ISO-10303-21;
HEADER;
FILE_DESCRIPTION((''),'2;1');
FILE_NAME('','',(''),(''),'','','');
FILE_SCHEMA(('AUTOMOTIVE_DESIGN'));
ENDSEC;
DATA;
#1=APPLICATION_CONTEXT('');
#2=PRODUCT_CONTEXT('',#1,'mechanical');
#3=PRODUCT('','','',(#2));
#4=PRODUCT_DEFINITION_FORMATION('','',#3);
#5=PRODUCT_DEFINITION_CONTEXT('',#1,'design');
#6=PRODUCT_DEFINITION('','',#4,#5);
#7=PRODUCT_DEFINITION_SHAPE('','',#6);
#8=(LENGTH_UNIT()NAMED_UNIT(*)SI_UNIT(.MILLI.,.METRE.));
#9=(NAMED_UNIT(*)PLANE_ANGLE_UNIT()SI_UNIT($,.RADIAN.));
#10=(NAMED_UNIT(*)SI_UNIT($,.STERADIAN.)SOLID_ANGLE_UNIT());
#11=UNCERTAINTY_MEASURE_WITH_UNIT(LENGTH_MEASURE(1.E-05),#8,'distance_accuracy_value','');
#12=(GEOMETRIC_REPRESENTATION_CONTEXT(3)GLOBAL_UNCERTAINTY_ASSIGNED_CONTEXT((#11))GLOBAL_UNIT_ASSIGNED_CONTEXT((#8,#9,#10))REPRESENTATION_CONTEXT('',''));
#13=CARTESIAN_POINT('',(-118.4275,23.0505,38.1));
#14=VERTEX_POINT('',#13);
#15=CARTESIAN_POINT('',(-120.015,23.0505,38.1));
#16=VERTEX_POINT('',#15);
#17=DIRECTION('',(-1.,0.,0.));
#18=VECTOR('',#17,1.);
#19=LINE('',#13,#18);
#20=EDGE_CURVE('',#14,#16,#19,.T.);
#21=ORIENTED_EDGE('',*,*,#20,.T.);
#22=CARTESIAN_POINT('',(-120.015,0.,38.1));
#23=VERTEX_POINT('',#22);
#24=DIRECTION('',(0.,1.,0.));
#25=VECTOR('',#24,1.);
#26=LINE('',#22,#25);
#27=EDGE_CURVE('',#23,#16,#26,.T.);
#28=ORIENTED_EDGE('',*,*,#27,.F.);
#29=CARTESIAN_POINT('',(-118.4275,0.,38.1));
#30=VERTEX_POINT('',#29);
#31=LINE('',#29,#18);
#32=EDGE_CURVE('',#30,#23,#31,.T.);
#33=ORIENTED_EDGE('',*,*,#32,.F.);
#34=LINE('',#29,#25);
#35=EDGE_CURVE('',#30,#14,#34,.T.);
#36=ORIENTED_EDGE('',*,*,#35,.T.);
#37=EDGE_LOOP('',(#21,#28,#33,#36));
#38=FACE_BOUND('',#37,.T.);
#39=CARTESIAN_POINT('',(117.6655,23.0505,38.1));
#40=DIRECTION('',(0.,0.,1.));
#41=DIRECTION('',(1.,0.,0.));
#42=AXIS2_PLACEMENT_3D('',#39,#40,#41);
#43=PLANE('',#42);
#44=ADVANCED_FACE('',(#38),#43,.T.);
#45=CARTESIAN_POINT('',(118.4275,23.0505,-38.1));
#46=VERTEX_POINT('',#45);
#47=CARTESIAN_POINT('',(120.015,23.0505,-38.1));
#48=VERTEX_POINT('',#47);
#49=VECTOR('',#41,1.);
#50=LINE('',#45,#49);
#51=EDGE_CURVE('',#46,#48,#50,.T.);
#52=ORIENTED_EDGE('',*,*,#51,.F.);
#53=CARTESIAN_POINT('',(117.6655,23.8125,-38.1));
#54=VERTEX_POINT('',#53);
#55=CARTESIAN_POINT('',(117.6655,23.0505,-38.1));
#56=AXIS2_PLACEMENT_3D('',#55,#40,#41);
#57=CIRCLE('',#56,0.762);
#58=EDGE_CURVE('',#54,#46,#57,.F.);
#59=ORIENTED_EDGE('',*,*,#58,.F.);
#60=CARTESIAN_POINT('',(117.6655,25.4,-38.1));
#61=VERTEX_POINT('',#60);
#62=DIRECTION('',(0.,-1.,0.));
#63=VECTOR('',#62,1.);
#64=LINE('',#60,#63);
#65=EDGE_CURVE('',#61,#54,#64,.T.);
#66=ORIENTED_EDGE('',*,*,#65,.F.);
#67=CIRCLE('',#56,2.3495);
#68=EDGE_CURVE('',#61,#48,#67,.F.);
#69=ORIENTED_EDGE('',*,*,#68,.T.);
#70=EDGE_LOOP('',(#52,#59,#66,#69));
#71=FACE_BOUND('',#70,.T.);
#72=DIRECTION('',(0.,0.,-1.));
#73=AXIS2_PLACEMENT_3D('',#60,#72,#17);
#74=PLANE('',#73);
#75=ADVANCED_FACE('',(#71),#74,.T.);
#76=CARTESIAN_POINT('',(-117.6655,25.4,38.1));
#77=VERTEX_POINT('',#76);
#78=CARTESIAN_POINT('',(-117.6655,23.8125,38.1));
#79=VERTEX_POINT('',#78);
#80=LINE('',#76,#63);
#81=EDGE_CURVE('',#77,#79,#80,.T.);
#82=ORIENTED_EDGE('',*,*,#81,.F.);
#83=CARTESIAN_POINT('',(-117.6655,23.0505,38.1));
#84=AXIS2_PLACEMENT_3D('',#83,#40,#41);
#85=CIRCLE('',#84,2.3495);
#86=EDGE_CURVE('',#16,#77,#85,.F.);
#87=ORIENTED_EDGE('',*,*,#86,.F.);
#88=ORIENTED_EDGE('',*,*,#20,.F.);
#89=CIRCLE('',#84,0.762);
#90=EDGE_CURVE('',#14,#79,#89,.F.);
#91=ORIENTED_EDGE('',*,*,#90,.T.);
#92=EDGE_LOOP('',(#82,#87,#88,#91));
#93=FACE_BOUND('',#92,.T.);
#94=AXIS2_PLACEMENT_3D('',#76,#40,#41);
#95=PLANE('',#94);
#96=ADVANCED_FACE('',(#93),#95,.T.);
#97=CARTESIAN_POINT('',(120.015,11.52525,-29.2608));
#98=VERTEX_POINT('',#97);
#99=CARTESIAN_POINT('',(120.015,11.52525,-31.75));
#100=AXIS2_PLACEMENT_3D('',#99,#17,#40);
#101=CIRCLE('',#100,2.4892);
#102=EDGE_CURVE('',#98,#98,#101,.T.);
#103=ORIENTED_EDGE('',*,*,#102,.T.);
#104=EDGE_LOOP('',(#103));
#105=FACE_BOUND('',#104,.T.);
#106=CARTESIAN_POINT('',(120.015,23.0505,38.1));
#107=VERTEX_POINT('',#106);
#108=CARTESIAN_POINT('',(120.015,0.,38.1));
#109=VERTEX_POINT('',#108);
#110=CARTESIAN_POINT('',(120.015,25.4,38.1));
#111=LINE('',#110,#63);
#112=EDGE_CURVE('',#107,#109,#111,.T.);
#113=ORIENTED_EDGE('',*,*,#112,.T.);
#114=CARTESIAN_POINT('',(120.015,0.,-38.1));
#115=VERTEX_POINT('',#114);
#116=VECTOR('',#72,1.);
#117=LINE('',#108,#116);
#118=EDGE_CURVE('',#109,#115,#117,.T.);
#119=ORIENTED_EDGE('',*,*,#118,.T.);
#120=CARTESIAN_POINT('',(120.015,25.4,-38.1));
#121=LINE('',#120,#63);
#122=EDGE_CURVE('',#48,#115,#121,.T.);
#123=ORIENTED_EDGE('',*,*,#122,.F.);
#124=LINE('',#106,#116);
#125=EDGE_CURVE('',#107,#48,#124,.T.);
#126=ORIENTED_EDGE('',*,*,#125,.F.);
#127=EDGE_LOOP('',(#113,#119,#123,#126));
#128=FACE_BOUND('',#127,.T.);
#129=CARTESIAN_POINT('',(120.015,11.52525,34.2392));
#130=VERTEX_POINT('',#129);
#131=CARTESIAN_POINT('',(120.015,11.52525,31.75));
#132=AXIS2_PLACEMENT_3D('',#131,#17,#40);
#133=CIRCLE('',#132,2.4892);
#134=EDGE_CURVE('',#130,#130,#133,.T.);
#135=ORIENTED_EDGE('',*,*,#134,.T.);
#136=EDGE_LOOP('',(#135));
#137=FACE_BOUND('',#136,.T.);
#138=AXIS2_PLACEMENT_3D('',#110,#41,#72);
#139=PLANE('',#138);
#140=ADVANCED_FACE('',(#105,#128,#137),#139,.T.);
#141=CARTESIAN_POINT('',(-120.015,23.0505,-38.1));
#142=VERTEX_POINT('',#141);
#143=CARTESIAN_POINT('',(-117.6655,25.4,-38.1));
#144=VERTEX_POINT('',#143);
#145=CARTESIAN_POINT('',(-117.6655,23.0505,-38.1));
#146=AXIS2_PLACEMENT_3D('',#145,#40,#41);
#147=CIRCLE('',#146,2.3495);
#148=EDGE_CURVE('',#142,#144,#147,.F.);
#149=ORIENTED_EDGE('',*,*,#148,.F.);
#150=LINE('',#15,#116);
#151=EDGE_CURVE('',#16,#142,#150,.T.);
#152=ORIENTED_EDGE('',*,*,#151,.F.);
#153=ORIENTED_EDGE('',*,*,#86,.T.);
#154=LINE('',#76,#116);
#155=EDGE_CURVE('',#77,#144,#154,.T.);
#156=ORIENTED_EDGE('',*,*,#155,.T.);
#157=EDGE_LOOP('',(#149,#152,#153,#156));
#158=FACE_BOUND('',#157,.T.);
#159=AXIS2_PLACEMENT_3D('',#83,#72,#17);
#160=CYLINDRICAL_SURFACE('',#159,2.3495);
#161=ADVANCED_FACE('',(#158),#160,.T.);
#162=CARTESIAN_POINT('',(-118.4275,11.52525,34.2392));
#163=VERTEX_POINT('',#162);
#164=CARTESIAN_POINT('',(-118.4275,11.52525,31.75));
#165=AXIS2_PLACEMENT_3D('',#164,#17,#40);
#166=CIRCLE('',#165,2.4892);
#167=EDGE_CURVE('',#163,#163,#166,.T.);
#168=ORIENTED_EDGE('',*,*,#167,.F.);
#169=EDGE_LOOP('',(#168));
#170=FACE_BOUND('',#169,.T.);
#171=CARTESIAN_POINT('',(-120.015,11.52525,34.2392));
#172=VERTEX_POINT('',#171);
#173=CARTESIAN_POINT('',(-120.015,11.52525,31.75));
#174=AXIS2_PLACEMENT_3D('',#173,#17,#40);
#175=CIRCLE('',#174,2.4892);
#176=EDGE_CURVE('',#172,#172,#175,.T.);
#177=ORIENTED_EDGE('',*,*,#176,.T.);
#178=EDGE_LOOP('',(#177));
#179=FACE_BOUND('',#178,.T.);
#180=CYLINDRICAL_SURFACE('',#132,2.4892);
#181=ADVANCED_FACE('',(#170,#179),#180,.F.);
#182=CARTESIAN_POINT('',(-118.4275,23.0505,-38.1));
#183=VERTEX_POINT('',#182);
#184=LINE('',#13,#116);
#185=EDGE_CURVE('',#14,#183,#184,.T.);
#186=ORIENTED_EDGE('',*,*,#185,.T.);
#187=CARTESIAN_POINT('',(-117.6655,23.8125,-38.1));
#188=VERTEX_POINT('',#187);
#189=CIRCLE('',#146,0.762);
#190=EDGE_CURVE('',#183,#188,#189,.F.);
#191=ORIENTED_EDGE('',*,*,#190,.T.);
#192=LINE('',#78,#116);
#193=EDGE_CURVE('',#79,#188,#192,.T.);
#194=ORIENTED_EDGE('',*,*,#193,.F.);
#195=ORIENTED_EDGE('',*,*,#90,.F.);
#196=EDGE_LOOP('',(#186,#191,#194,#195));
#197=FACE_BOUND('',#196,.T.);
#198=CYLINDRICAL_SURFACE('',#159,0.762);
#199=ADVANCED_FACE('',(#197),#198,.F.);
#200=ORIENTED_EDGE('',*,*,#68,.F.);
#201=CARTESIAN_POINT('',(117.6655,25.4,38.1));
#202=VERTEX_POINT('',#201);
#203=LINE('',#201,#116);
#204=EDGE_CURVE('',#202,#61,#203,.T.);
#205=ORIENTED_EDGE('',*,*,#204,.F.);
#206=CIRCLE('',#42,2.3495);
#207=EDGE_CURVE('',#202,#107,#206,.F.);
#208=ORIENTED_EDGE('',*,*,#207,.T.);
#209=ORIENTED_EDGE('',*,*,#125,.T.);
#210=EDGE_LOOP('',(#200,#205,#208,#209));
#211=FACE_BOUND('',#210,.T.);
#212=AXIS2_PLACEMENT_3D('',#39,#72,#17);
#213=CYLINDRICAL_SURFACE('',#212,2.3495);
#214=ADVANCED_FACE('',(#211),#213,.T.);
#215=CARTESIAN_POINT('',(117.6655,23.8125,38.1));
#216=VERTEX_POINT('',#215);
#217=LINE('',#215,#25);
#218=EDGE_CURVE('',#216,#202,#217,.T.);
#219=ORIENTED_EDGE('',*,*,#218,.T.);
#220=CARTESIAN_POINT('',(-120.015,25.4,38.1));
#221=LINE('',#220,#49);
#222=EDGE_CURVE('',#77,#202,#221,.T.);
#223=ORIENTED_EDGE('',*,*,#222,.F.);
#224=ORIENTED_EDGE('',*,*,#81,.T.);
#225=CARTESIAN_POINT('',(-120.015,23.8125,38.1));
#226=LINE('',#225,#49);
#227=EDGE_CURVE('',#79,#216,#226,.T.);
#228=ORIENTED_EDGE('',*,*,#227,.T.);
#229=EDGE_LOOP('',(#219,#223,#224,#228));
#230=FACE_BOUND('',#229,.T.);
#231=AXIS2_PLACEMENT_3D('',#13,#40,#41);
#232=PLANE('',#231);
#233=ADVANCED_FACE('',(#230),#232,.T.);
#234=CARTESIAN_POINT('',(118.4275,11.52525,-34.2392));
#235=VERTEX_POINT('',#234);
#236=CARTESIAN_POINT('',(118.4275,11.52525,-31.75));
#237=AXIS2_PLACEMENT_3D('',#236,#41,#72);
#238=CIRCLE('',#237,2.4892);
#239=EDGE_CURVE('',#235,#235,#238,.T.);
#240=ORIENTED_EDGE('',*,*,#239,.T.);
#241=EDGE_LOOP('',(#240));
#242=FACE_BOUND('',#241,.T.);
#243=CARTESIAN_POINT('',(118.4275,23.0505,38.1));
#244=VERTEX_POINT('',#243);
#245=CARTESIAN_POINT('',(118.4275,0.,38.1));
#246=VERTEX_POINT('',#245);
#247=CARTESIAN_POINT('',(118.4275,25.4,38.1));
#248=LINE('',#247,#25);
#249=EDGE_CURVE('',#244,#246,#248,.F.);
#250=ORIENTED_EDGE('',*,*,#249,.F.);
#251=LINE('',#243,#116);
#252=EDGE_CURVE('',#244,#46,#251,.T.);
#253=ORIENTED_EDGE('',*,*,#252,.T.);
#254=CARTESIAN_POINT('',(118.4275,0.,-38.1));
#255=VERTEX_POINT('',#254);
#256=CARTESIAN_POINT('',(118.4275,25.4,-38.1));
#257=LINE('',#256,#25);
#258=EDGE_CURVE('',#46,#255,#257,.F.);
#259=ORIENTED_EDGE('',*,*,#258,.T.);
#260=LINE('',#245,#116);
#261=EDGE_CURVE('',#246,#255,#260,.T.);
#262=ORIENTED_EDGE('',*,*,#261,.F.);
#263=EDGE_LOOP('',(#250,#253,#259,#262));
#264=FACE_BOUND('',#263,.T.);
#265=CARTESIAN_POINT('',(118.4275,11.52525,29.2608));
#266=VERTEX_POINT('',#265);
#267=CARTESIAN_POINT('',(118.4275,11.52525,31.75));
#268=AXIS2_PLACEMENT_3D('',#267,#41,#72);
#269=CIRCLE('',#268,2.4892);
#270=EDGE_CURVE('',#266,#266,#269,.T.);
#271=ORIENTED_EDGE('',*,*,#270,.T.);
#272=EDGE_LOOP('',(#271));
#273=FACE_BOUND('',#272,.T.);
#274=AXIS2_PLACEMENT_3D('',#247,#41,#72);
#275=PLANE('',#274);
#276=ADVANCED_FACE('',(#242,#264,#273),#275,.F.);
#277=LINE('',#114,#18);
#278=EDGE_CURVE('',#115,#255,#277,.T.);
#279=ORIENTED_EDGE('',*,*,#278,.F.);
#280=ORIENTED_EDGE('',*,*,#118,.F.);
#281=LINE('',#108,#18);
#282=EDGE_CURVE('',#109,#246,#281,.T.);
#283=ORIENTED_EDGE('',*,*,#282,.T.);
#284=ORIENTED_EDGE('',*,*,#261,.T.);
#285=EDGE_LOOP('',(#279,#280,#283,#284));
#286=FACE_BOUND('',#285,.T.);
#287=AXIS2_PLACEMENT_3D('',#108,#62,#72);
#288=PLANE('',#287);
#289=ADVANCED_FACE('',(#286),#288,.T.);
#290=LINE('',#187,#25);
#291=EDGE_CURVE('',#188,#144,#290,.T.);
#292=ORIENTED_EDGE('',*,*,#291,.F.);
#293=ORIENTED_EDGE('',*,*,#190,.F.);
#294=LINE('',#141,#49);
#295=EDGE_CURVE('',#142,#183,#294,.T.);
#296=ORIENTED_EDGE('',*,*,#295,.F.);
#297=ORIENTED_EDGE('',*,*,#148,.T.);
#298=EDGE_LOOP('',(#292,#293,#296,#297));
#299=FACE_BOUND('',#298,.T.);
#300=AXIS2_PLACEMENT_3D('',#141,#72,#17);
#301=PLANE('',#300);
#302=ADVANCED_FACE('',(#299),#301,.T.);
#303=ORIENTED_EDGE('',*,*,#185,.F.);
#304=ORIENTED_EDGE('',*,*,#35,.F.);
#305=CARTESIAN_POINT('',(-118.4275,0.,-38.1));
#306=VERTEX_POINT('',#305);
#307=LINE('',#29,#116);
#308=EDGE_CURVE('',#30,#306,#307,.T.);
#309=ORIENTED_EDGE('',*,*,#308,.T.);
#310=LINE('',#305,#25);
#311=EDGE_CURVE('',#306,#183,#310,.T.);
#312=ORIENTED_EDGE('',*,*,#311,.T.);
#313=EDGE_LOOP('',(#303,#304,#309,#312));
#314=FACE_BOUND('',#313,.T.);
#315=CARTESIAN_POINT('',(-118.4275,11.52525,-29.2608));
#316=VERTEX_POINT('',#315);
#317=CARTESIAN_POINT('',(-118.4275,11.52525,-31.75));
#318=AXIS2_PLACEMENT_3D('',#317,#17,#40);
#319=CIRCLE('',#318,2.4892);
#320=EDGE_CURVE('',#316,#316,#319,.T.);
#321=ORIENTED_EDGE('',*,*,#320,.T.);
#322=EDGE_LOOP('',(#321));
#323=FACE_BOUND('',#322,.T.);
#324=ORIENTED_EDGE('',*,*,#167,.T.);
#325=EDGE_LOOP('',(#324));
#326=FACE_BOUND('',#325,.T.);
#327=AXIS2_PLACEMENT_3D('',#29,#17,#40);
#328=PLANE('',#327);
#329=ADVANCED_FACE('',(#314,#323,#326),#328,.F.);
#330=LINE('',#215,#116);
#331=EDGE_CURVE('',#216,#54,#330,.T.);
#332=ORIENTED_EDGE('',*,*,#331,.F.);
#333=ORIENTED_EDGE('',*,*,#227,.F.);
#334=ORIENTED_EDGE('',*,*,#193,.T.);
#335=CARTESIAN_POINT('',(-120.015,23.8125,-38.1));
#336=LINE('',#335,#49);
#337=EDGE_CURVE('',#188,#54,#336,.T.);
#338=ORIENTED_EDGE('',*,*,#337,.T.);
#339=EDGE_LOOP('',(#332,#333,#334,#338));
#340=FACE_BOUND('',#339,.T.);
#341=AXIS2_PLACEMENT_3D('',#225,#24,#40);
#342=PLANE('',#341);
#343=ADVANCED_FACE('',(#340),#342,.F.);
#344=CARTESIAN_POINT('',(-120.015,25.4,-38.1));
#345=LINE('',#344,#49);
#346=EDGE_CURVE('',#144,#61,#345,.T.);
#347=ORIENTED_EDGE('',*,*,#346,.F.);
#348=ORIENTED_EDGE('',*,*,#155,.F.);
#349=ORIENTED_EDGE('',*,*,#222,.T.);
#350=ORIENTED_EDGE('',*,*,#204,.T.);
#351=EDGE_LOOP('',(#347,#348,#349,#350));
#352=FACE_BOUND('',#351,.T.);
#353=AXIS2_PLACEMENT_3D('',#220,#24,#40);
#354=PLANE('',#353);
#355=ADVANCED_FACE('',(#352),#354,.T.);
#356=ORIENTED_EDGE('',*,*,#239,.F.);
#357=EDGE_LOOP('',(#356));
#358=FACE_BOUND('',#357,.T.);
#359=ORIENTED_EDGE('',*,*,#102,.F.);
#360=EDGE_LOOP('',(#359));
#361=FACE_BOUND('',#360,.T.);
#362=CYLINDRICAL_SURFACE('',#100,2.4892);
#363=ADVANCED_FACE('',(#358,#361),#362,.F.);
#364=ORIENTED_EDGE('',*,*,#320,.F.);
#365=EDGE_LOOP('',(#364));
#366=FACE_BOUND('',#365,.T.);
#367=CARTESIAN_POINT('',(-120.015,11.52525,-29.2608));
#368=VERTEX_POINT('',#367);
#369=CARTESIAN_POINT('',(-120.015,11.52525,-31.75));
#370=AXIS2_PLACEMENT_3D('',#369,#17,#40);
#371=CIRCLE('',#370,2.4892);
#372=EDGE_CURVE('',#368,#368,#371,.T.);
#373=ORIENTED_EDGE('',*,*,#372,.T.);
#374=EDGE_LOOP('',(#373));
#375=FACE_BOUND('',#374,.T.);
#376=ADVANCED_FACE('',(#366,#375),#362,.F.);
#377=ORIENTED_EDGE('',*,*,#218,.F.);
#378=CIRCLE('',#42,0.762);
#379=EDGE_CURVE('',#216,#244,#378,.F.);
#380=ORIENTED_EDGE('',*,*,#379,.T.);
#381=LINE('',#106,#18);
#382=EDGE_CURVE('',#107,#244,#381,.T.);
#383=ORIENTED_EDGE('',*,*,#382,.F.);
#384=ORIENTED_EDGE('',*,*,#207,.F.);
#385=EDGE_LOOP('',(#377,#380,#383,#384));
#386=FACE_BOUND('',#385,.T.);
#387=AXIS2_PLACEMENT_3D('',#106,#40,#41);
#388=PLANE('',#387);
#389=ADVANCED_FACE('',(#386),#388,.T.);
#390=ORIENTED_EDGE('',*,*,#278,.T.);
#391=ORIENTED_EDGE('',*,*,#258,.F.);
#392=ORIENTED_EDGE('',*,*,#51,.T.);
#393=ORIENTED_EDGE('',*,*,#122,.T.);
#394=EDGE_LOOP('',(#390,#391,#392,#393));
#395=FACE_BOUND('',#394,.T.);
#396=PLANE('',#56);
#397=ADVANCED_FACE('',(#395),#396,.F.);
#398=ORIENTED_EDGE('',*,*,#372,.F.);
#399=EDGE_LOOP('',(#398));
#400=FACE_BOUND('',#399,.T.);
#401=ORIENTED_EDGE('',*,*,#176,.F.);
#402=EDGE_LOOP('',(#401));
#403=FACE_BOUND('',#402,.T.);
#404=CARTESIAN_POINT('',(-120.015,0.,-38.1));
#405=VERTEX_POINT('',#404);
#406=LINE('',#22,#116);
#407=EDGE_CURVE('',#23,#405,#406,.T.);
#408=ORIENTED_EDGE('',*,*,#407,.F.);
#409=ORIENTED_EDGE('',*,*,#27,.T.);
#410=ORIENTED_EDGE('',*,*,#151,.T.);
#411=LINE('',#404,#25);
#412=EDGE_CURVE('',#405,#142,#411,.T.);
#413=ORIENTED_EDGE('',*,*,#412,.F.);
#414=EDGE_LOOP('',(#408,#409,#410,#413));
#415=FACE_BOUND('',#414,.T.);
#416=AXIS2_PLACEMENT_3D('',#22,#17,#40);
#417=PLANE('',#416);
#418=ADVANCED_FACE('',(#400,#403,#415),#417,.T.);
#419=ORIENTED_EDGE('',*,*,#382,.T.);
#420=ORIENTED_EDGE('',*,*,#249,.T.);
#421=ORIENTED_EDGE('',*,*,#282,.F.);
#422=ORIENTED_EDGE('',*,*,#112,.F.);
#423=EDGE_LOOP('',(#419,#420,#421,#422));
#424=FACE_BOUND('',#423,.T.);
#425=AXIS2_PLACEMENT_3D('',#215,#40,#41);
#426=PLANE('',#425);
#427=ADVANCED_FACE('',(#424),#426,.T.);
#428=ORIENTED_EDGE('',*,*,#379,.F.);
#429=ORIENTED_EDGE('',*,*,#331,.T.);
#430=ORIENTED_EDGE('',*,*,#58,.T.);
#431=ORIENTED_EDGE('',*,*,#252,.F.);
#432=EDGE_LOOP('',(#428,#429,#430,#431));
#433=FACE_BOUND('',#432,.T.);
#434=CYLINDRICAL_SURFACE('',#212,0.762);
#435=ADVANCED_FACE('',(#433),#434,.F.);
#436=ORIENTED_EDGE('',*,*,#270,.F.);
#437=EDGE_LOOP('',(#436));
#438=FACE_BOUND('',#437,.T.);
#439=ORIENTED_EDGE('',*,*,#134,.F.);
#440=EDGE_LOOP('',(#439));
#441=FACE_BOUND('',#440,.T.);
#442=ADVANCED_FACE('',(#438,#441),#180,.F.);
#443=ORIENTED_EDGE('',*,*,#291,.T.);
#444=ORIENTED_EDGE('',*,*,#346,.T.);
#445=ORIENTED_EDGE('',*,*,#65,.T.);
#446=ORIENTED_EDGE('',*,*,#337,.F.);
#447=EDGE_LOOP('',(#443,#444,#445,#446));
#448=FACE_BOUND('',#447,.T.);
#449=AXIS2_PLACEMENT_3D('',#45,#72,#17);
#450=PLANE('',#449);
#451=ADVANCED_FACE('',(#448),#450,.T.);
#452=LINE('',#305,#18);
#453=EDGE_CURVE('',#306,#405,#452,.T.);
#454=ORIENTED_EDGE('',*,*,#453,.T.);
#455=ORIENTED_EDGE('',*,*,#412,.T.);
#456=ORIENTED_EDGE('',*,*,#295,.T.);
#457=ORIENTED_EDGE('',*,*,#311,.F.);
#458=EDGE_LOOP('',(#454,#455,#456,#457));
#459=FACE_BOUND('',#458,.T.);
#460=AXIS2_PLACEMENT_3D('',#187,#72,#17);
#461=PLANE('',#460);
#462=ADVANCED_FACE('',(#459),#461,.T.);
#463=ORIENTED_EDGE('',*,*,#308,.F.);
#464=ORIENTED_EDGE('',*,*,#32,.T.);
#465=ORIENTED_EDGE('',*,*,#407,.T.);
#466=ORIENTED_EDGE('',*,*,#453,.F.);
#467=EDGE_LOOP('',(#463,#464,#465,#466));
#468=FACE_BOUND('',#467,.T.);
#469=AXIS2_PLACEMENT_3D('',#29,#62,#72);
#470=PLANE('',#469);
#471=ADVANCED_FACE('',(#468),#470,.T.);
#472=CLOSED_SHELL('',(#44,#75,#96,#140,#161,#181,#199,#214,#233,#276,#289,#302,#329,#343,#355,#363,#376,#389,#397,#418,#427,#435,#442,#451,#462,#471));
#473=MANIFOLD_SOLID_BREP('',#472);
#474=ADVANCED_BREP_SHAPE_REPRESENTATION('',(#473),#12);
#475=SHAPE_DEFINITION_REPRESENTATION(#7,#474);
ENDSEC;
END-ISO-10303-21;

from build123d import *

# Parameters (mm, degrees)
BASE_FLANGE1_DEPTH = 38.1
SKETCH6_R          = 2.4892
CUT_EXTRUDE1_DEPTH = 245.358693113


# Sheet-metal steps are written as plain solids
with BuildPart() as part:
    # Sketch1 → Base-Flange1 (new, symmetric)
    with BuildSketch(Plane.XY):
        with BuildLine():
            Line((-120.015, 0), (-120.015, 23.0505))
            ThreePointArc((-120.015, 23.0505), (-119.326847382, 24.711847382), (-117.6655, 25.4))
            Line((-117.6655, 25.4), (117.6655, 25.4))
            ThreePointArc((117.6655, 25.4), (119.326847382, 24.711847382), (120.015, 23.0505))
            Line((120.015, 23.0505), (120.015, 0))
            Line((120.015, 0), (118.4275, 0))
            Line((118.4275, 0), (118.4275, 23.0505))
            ThreePointArc((118.4275, 23.0505), (118.204315367, 23.589315367), (117.6655, 23.8125))
            Line((117.6655, 23.8125), (-117.6655, 23.8125))
            ThreePointArc((-117.6655, 23.8125), (-118.204315367, 23.589315367), (-118.4275, 23.0505))
            Line((-118.4275, 23.0505), (-118.4275, 0))
            Line((-118.4275, 0), (-120.015, 0))
        make_face()
    extrude(amount=BASE_FLANGE1_DEPTH, both=True)

    # Sketch6 → Cut-Extrude1 (cut, through all)
    with BuildSketch(Plane.ZY.offset(120.015)):
        with Locations((-31.75, 11.52525)):
            Circle(SKETCH6_R)
        with Locations((31.75, 11.52525)):
            Circle(SKETCH6_R)
    extrude(amount=-CUT_EXTRUDE1_DEPTH, mode=Mode.SUBTRACT)


solid = part.part
